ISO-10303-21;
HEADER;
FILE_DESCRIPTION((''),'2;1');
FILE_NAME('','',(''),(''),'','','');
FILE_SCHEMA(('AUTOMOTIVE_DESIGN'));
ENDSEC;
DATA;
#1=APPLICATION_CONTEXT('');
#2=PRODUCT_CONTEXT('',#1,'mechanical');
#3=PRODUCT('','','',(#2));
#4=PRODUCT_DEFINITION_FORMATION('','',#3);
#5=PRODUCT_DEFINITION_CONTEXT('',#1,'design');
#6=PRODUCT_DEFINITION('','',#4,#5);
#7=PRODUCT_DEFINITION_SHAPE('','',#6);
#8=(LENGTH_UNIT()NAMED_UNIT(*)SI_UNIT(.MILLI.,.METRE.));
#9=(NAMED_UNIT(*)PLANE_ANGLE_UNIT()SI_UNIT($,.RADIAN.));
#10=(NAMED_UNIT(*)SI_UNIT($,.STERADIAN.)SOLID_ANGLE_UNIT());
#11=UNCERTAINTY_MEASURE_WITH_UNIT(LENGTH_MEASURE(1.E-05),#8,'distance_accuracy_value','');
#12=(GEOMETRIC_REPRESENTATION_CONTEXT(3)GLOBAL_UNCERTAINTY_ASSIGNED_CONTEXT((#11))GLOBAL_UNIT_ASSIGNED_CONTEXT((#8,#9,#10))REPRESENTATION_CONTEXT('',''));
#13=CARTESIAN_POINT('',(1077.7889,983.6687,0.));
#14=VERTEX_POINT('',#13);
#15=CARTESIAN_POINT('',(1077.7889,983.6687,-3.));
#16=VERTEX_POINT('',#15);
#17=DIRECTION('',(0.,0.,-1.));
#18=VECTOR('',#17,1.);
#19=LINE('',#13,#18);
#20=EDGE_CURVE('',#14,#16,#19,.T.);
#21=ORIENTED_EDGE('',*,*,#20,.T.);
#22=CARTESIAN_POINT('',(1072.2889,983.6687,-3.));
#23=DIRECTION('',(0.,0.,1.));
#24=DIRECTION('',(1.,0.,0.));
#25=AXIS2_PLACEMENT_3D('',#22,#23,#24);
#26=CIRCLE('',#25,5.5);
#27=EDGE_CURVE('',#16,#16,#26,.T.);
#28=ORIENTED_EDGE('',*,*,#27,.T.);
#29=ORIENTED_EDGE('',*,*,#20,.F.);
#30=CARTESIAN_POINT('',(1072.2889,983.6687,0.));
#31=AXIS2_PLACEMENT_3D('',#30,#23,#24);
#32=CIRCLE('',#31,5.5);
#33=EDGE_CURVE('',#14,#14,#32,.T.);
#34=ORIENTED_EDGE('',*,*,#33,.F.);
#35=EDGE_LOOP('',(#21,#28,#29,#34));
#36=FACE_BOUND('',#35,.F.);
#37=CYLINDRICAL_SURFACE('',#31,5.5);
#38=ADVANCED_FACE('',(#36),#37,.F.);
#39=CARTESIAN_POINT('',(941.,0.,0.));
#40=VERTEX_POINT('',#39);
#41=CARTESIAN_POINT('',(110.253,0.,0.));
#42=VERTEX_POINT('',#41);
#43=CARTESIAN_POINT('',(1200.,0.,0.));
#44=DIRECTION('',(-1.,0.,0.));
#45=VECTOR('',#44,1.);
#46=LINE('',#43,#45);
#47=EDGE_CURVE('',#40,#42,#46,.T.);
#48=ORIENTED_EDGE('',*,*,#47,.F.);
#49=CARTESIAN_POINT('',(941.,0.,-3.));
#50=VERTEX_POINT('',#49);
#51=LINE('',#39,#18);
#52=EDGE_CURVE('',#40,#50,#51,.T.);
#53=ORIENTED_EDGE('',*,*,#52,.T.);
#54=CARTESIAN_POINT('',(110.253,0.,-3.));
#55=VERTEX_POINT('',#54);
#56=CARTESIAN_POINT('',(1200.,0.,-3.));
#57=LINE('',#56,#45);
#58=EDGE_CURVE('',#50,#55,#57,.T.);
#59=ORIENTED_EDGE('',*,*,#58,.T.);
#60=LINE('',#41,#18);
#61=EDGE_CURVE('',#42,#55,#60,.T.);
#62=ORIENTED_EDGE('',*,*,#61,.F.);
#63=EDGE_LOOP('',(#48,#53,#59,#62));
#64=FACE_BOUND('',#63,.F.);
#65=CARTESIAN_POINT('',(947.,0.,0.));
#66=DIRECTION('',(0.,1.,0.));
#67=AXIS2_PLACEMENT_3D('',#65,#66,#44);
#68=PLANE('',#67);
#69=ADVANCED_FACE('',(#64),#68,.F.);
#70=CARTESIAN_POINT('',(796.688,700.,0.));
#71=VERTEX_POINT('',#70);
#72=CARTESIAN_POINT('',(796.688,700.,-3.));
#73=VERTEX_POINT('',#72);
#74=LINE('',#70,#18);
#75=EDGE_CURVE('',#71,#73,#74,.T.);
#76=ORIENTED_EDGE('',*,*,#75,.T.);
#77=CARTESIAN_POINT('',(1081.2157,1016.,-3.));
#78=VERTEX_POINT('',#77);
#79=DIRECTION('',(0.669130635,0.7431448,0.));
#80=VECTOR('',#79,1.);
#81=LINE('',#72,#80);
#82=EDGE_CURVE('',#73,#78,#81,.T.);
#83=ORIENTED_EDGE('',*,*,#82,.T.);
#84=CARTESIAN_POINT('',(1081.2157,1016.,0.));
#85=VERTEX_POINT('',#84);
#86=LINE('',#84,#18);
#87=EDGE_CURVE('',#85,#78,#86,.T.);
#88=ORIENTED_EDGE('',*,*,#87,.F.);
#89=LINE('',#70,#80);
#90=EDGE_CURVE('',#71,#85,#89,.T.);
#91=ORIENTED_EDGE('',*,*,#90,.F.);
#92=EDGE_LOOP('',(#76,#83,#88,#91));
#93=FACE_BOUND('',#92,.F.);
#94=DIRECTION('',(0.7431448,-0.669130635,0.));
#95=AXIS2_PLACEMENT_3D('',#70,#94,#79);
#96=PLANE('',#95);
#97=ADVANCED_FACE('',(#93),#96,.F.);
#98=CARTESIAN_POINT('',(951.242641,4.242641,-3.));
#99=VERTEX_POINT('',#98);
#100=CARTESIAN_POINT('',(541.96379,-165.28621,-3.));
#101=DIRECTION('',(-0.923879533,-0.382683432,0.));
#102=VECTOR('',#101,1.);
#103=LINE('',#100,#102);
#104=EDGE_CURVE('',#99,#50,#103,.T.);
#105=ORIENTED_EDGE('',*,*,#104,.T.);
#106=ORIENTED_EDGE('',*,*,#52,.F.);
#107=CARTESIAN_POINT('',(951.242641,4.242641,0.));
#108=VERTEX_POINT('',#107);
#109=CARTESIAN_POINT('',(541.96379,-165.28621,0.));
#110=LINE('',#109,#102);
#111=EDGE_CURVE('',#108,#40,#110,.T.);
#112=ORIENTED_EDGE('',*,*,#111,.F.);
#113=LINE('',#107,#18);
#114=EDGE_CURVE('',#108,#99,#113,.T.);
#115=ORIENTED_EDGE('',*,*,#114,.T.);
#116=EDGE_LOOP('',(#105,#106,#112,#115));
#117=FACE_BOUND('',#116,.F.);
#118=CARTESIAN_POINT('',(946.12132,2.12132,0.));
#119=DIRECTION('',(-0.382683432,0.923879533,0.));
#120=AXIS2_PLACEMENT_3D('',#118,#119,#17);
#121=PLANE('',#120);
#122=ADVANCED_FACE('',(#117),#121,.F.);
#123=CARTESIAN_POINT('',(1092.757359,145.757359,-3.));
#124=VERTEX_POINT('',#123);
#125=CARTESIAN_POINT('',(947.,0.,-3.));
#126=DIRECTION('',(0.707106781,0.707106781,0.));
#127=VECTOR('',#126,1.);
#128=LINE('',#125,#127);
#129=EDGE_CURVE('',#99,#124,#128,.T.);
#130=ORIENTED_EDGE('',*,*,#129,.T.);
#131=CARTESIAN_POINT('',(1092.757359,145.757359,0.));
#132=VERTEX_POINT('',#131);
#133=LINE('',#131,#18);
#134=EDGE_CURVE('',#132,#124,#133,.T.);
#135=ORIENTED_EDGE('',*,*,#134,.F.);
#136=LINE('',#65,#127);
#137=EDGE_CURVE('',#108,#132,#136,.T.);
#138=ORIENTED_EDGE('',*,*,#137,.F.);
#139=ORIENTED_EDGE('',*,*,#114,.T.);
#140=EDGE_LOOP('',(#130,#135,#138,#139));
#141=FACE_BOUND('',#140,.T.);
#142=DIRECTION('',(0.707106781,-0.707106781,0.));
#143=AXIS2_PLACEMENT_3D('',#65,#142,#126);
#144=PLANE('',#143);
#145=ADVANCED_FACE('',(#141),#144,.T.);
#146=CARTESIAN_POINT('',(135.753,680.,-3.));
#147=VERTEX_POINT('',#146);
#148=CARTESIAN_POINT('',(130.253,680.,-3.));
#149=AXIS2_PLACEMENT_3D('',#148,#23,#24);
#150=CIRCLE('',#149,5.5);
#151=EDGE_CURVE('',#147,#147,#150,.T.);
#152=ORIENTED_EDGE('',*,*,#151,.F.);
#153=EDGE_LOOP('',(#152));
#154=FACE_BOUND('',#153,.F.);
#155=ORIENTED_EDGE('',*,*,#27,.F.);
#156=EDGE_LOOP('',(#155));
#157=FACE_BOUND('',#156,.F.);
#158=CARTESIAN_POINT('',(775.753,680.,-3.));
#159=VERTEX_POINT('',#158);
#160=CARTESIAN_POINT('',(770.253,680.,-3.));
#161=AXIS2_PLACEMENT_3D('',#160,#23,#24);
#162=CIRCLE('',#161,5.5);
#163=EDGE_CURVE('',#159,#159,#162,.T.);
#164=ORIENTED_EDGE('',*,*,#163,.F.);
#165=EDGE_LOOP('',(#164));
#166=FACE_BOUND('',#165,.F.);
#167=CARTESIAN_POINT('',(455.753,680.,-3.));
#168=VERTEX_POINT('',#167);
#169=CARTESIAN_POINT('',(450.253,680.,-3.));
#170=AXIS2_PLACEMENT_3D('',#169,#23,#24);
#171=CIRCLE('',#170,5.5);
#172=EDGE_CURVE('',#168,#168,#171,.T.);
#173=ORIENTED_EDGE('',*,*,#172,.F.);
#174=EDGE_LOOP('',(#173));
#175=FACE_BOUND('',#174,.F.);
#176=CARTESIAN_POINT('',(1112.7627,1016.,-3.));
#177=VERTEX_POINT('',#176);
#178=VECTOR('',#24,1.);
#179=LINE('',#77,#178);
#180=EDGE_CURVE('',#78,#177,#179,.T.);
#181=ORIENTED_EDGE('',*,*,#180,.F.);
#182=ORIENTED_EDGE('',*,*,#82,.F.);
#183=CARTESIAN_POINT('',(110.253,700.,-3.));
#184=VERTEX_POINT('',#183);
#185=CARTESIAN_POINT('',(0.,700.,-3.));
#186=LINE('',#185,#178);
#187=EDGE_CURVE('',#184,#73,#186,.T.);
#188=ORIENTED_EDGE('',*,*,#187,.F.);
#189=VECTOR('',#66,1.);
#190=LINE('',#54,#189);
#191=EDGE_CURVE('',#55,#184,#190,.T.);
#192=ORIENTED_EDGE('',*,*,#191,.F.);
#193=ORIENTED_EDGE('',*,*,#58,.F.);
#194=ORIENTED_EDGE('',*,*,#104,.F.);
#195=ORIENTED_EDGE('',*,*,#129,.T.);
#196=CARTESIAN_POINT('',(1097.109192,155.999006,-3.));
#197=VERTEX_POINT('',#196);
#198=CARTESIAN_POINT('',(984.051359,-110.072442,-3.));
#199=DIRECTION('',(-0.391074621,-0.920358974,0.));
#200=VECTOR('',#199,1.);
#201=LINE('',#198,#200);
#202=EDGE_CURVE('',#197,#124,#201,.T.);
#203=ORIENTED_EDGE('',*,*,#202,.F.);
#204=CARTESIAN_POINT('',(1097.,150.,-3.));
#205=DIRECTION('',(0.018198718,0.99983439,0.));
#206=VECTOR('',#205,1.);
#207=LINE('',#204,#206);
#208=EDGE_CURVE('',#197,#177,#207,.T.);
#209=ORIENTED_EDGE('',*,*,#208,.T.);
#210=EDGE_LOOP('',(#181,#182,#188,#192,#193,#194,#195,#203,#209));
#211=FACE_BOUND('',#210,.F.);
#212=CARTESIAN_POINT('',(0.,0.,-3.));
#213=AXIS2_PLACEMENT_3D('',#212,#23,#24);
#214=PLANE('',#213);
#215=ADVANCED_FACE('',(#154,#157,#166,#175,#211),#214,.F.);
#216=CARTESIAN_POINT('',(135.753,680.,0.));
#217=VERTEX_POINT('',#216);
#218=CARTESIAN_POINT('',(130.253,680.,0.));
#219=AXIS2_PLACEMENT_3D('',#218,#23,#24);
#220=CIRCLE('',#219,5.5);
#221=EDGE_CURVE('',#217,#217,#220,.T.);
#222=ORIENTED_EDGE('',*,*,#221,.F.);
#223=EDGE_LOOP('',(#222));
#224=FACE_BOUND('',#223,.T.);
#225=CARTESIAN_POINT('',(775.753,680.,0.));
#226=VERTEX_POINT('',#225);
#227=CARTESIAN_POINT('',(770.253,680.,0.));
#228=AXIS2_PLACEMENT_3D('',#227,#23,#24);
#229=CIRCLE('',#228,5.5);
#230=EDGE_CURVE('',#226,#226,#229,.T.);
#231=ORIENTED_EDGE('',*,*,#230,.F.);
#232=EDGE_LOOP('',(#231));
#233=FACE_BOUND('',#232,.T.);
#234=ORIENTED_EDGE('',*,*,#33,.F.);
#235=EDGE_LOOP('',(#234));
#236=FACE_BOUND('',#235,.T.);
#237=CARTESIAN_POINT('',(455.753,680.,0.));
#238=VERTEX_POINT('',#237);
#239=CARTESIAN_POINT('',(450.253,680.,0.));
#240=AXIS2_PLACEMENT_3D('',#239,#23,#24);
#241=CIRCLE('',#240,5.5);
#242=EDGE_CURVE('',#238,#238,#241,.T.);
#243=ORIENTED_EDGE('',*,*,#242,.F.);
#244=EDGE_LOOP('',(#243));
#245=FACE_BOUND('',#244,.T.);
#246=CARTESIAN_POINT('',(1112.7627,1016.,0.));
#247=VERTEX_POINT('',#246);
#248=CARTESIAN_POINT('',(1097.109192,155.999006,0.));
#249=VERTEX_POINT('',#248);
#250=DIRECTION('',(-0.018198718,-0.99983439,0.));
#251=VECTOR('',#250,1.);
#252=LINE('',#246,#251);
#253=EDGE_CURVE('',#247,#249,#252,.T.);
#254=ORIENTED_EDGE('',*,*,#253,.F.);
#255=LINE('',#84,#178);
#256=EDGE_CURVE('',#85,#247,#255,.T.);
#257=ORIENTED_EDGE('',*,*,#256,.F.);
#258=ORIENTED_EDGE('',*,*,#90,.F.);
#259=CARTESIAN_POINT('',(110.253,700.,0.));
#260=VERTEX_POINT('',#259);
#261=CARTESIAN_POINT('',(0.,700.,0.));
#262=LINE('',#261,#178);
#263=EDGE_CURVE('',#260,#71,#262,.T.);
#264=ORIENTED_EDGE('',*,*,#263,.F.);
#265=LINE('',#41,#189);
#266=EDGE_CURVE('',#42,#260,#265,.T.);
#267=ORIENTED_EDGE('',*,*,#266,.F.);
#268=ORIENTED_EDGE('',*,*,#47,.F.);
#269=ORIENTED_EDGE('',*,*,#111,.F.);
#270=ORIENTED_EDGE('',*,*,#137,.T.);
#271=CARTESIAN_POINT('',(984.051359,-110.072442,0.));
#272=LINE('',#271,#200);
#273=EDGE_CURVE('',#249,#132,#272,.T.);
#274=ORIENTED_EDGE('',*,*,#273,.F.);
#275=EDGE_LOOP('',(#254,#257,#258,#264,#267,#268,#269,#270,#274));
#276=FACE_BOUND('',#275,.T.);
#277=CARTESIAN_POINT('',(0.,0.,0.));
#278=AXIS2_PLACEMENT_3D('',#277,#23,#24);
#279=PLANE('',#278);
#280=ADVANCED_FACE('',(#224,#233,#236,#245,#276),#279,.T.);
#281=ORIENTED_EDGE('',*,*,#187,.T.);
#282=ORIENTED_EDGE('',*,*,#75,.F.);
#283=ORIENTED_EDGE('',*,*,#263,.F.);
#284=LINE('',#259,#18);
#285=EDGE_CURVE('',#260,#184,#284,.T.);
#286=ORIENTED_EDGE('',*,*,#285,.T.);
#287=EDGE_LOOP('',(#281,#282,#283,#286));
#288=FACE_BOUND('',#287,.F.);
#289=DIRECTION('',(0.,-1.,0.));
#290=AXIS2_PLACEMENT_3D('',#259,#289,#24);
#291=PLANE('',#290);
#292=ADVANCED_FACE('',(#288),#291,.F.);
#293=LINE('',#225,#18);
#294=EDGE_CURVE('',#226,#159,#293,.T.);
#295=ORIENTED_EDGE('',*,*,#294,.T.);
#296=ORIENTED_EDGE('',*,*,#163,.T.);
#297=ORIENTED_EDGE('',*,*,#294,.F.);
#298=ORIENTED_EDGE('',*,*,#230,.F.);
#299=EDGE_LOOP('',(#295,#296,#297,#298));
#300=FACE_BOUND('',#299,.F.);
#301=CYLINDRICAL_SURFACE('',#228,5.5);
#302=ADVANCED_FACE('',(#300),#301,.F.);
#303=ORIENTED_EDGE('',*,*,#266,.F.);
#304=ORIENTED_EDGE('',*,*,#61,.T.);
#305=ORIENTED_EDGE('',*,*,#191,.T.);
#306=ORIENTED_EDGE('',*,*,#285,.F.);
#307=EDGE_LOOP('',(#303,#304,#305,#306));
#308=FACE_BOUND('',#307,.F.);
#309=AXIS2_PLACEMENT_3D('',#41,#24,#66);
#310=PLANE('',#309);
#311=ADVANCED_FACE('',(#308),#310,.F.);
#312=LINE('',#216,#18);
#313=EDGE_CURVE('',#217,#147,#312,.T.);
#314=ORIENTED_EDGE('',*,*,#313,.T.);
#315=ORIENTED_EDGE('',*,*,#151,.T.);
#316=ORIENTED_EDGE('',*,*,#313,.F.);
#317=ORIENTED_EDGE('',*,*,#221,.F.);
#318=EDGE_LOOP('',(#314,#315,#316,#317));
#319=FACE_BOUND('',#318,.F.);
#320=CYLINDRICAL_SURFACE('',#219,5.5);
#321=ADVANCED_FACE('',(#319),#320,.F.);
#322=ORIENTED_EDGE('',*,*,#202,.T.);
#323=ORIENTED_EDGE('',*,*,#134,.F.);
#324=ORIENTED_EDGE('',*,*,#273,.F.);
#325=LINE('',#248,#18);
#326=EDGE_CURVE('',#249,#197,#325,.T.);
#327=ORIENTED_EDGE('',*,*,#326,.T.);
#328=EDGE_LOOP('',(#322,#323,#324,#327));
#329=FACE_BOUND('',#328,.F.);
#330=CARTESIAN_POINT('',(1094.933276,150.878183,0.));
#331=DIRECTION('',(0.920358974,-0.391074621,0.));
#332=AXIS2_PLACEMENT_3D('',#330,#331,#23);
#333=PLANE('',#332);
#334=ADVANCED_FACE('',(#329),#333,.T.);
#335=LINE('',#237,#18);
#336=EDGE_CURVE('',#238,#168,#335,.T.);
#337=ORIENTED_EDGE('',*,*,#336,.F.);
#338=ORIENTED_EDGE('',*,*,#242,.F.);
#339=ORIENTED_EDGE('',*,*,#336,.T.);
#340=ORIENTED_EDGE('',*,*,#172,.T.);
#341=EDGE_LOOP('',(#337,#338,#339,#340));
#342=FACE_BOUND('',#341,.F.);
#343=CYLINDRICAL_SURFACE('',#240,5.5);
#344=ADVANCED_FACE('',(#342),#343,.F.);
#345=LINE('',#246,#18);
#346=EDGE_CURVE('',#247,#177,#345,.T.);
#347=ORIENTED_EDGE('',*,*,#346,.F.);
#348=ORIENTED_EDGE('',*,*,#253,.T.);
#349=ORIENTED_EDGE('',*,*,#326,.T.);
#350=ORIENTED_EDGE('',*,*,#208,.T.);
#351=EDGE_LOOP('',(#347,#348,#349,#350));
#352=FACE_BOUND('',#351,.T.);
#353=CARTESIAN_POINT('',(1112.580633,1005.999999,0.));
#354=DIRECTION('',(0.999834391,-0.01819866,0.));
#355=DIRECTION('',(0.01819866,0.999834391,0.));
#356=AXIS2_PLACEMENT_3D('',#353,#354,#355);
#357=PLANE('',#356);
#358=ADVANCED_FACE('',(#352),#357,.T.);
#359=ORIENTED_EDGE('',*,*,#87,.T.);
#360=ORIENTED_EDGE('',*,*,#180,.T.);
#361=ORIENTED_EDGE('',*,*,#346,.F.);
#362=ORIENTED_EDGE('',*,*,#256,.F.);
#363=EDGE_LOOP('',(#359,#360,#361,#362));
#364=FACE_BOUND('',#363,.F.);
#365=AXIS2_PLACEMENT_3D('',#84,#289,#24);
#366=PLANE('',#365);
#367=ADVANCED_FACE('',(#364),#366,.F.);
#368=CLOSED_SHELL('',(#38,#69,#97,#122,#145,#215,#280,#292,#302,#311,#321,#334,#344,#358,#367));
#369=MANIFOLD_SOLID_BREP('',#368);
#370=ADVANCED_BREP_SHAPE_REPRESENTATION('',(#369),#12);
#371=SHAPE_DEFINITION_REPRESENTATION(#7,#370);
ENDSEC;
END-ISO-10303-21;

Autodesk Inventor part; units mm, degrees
ref_plane "YZ Plane" through (0, 0, 0) normal (1, 0, 0) x (0, 1, 0)
ref_plane "XZ Plane" through (0, 0, 0) normal (0, 1, 0) x (-1, 0, 0)
ref_plane "XY Plane" through (0, 0, 0) normal (0, 0, 1) x (1, 0, 0)
sketch "Sketch8" plane through (0, 0, 0) normal (0, 0, 1) x (1, 0, 0)
  line L0 (0, 2897) -> (1200, 2897)
  line L1 (1200, 2897) -> (1200, 0)
  line L2 (1200, 0) -> (0, 0)
  line L3 (0, 0) -> (0, 2897)
  line L4 (0, 2897) -> (1200, 0) construction
  line L5 (1200, 2897) -> (0, 0) construction
  line L6 (947, 0) -> (1097, 150)
  line L7 (1097, 150) -> (1147, 2897)
  line L8 (0, 700) -> (1200, 700)
  line L9 (1112.5806, 1006) -> (837.057, 700)
  line L10 (110.253, 0) -> (110.253, 700)
  line L11 (796.688, 700) -> (1081.2157, 1016)
  line L12 (1081.2157, 1016) -> (1112.7627, 1016)
  point P0 (600, 1448.5)
  point P1 (1107.0109, 700)
  dimension "d43" = 1200
  dimension "d44" = 2897
  dimension "d45" = 53
  dimension "d46" = 947
  dimension "d47" = 150
  dimension "d48" = 103
  dimension "d49" = 700
  dimension "d55" = 306
  dimension "d57" = 110.253
  dimension "d61" = 48
  dimension "d65" = 10
  dimension "d66" = 30
extrude "Plate4" add sketch "Sketch8" against normal blind 3 contours L7 L9 L8 L11 L12 | L8 L7 L6 L2 L10 | L7 L8 L9
chamfer "Corner Chamfer1" distance 6 angle 45 2 edges at (947, 0, -1.5) (1097, 150, -1.5)
sketch "Sketch9" plane through (0, 0, 0) normal (0, 0, 1) x (1, 0, 0)
  line L0 (1097.1092, 155.999) -> (1092.7574, 145.7574) projected
  line L1 (1097.1092, 155.999) -> (1112.7627, 1016) projected
  line L2 (1112.7627, 1016) -> (1081.2157, 1016) projected
  line L3 (1081.2157, 1016) -> (796.688, 700) projected
  line L4 (796.688, 700) -> (110.253, 700) projected
  line L5 (110.253, 700) -> (110.253, 0) projected
  line L6 (110.253, 0) -> (941, 0) projected
  line L7 (951.2426, 4.2426) -> (941, 0) projected
  line L8 (951.2426, 4.2426) -> (1092.7574, 145.7574) projected
  circle A0 centre (130.253, 680) radius 5.5
  point P0 (0, 0)
  dimension "d67" = 11
  dimension "d68" = 20
  dimension "d69" = 20
extrude "Extrusion2" cut sketch "Sketch9" against normal through all contours A0
pattern_linear "Rectangular Pattern2" count 3 spacing 320 along (1, 0, 0) of "Extrusion2"
sketch "Sketch10" plane through (0, 0, 0) normal (0, 0, 1) x (1, 0, 0)
  circle A0 centre (770.253, 680) radius 5.5 projected
  circle A1 centre (450.253, 680) radius 5.5 projected
  circle A2 centre (130.253, 680) radius 5.5 projected
  line L0 (1097.1092, 155.999) -> (1092.7574, 145.7574) projected
  line L1 (1097.1092, 155.999) -> (1112.7627, 1016) projected
  line L2 (1112.7627, 1016) -> (1081.2157, 1016) projected
  line L3 (1081.2157, 1016) -> (796.688, 700) projected
  line L4 (796.688, 700) -> (110.253, 700) projected
  line L5 (110.253, 700) -> (110.253, 0) projected
  line L6 (110.253, 0) -> (941, 0) projected
  line L7 (951.2426, 4.2426) -> (941, 0) projected
  line L8 (951.2426, 4.2426) -> (1092.7574, 145.7574) projected
  circle A3 centre (1072.2889, 983.6687) radius 5.5
  line L9 (1081.2157, 1016) -> (1112.254, 988.053)
  line L10 (1097.1092, 155.999) -> (1112.7627, 1016) projected
  point P0 (0, 0)
  dimension "d75" = 15
  dimension "d76" = 30
extrude "Extrusion3" cut sketch "Sketch10" against normal through all contours A3
equation "\"d50\" = Thickness"
equation "\"BendReliefWidth\" = Thickness"
equation "\"BendReliefDepth\" = 0.5 * Thickness"
equation "\"CornerReliefSize\" = 4 * Thickness"
equation "\"MinimumRemnant\" = 2 * Thickness"
equation "\"TransitionRadius\" = BendRadius"
equation "\"JacobiRadiusSize\" = BendRadius"
equation "\"GapSize\" = Thickness"
equation "\"Thickness\" = 3"
equation "\"BendRadius\" = 5"
properties part number "BSH 015 board cone wall" material "09g2s"
